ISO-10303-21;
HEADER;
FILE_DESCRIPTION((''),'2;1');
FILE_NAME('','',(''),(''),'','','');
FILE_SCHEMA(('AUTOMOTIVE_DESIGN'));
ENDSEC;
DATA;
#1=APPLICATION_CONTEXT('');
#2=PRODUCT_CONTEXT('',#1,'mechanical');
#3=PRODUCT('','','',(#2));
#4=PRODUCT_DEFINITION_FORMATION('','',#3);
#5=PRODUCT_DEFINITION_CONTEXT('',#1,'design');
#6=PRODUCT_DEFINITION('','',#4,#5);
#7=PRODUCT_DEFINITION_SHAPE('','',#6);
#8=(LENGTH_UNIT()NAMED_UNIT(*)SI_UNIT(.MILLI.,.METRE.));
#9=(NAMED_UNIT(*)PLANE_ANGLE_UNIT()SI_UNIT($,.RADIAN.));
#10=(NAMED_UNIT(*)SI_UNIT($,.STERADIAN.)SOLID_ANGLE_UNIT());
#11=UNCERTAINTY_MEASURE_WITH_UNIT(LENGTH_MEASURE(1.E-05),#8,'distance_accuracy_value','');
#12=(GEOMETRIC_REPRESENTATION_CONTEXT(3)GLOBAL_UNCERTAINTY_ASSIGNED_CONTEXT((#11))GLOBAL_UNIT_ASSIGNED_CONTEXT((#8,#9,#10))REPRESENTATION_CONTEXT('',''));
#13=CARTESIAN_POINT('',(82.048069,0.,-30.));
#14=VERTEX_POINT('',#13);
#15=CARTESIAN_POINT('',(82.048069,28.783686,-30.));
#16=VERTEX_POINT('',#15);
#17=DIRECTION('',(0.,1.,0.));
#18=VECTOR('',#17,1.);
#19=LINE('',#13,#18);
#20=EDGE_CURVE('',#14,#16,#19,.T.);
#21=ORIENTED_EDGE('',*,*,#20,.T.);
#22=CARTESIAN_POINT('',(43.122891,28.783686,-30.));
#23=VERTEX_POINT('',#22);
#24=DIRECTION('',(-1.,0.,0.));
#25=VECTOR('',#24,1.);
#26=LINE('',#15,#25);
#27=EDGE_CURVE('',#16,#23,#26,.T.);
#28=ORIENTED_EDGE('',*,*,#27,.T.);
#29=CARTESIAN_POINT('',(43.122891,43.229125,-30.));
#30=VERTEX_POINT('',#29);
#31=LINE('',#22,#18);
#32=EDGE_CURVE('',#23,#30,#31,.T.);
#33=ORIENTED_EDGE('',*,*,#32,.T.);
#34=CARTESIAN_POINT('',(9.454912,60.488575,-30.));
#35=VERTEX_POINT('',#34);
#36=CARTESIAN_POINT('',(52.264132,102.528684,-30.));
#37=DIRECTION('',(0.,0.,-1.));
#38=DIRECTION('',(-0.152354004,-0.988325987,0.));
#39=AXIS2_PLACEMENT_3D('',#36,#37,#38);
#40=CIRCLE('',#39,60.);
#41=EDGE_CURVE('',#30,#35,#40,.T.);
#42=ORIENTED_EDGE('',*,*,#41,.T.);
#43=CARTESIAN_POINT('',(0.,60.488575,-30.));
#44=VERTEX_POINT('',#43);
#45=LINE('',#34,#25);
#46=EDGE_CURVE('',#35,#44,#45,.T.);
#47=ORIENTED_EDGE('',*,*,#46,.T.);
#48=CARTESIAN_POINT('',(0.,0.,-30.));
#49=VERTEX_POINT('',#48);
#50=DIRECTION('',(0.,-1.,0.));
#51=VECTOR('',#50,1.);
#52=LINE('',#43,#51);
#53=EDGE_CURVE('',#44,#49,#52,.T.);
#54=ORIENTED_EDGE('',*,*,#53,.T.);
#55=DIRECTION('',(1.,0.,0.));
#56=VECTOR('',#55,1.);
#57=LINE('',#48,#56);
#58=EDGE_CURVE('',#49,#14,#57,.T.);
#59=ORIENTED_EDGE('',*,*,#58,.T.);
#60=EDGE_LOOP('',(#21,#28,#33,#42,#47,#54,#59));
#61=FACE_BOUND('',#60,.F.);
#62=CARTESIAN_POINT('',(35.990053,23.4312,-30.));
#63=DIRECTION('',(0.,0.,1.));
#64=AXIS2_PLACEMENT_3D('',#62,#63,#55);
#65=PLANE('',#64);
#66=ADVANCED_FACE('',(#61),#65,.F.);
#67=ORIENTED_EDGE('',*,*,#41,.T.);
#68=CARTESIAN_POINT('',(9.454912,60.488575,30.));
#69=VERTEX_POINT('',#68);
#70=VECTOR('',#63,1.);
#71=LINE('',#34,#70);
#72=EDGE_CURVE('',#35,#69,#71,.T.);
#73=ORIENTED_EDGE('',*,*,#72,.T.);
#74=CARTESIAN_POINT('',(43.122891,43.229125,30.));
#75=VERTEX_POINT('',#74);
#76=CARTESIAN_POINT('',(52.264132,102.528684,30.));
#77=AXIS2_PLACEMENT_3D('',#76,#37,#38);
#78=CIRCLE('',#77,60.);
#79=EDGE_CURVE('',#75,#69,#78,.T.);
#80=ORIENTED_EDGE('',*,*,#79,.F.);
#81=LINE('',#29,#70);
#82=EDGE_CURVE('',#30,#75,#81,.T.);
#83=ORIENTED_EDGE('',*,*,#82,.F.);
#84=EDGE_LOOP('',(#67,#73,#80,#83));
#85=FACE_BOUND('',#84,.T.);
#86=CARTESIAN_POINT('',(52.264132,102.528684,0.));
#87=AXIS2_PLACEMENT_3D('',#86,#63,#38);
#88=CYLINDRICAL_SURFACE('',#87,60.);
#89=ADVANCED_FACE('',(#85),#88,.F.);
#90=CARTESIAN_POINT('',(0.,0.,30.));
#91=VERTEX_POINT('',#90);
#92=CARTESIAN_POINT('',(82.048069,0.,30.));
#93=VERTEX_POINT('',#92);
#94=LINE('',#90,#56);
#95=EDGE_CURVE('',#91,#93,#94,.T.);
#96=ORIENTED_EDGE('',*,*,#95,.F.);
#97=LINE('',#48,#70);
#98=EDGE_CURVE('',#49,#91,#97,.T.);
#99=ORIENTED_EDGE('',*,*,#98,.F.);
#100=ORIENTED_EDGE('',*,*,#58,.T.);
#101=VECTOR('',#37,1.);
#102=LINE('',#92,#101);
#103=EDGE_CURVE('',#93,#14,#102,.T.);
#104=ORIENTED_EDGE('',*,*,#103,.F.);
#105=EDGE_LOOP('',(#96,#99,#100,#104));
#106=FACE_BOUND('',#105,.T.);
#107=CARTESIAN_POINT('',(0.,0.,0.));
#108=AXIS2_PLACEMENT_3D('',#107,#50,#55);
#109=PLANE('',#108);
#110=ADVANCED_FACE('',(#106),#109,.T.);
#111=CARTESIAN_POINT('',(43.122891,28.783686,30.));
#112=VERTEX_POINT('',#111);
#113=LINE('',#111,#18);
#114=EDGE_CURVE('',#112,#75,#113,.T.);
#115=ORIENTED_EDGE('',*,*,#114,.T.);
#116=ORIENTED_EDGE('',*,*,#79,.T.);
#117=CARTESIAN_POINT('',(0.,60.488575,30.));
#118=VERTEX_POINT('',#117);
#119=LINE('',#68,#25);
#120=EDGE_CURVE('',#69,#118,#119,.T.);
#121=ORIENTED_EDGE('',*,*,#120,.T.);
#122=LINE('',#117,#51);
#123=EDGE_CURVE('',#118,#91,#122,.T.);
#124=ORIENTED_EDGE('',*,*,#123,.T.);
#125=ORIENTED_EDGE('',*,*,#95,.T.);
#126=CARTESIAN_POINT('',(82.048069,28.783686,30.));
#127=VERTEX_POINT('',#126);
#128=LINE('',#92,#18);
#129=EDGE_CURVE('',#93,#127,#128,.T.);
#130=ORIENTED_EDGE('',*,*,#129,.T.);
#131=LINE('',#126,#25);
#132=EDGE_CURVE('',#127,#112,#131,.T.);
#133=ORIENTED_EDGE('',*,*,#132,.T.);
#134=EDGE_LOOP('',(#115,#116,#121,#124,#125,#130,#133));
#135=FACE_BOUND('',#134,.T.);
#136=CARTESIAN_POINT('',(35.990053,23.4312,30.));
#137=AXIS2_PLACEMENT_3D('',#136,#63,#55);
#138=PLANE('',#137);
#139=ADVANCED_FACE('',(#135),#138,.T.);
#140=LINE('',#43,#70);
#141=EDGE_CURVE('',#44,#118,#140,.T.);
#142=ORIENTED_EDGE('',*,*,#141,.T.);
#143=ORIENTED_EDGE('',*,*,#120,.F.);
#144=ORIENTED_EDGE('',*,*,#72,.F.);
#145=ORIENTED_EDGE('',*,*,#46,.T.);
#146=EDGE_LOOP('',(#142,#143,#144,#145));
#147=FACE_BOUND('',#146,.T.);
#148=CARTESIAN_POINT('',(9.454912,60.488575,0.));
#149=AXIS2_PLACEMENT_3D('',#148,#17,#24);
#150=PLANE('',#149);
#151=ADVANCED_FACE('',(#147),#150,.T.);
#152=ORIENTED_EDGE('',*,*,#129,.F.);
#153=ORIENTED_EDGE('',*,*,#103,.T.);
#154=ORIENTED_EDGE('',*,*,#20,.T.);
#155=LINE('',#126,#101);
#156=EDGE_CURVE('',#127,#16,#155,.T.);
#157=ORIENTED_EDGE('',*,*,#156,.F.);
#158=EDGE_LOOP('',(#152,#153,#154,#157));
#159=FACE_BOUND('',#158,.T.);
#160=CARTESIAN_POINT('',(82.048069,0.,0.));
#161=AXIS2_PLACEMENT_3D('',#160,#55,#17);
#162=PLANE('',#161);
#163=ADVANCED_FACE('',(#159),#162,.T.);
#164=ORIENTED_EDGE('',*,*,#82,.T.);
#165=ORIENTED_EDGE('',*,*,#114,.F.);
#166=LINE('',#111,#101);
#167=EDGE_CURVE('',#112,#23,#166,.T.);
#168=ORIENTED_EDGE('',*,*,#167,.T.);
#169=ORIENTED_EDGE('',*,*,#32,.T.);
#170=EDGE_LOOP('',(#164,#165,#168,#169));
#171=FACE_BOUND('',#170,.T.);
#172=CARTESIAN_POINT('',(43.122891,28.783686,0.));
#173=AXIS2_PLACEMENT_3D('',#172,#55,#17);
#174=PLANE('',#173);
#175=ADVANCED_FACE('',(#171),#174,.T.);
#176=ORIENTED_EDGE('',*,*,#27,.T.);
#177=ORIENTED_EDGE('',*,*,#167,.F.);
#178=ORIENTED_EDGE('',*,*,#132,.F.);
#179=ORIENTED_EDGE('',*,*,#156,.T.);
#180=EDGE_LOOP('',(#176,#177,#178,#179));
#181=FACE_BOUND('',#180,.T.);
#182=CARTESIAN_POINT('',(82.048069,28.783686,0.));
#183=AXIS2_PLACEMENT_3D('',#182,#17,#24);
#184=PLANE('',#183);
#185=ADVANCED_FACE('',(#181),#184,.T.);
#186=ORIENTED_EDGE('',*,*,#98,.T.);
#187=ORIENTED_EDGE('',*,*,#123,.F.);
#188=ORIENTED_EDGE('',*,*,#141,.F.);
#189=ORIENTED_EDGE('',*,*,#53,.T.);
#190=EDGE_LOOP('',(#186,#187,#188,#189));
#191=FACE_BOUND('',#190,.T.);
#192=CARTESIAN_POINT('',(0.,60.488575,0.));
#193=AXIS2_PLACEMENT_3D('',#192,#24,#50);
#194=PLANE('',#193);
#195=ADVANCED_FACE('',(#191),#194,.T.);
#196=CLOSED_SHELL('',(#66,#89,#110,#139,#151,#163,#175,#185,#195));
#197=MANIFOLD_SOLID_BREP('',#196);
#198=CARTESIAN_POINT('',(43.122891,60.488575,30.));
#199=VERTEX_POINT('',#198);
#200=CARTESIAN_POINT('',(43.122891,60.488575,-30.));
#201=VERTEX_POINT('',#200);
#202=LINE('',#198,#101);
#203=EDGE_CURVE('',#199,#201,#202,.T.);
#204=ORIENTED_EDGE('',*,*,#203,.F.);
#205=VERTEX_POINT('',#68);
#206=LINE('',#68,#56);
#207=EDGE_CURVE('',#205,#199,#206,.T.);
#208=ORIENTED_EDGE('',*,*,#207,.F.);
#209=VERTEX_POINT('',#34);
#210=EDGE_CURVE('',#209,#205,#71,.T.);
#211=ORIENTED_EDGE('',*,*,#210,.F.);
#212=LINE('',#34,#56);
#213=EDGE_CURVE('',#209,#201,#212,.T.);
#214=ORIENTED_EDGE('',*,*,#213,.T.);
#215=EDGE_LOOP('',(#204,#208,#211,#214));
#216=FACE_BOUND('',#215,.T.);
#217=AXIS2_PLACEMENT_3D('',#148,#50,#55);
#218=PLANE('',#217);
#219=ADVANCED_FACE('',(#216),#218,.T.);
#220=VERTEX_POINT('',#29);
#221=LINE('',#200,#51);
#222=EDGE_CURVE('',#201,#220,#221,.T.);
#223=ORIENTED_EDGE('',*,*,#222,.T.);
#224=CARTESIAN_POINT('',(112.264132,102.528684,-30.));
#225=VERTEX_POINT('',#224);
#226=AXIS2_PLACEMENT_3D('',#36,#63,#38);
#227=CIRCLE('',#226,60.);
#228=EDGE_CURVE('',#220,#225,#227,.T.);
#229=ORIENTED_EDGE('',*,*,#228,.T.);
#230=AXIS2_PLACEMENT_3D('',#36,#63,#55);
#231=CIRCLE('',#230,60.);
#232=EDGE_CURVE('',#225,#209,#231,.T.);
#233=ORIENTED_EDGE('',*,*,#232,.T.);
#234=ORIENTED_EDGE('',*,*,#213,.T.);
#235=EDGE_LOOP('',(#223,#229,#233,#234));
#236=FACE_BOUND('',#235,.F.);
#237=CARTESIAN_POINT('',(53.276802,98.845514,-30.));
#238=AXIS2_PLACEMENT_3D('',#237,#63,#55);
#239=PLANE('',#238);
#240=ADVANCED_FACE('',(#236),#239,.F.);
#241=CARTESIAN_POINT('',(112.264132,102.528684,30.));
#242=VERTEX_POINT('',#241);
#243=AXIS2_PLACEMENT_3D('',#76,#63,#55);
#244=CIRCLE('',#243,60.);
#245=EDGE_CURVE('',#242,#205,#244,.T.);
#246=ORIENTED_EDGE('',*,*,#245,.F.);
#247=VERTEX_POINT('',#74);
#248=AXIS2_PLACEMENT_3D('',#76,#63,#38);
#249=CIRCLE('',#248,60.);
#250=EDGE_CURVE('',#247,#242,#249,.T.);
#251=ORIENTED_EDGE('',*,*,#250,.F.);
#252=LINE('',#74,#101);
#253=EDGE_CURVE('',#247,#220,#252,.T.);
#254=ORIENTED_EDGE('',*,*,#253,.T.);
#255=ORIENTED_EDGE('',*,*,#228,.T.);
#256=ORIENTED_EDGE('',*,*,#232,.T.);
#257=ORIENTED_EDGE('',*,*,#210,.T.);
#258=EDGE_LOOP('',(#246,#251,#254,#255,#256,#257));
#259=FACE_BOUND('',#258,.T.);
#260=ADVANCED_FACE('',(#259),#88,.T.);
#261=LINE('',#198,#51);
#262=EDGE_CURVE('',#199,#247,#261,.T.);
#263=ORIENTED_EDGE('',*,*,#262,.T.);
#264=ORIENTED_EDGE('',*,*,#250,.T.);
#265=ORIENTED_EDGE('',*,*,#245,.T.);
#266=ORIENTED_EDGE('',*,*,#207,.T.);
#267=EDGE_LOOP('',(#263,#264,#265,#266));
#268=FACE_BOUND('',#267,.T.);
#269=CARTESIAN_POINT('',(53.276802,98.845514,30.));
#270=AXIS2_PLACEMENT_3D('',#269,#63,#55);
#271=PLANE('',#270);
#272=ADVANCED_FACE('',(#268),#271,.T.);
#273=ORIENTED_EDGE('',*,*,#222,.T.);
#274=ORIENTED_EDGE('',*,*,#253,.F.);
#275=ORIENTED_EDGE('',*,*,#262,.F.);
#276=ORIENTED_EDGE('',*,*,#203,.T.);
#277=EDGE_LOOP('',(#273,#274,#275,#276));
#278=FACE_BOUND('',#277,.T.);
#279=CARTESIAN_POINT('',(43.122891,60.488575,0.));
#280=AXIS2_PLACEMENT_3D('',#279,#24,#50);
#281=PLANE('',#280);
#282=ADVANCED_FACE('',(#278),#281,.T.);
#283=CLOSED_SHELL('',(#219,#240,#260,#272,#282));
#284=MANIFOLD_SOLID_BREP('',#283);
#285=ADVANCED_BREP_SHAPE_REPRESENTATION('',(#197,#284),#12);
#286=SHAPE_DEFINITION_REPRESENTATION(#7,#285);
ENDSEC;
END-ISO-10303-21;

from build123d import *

# Parameters (mm, degrees)
F2_DEPTH = 30


with BuildPart() as f2:
    # F1 (on face) → F2 (new body, symmetric)
    with BuildSketch(Plane.XY):
        with BuildLine():
            ThreePointArc((43.1228913367, 43.2291245988), (91.3251453141, 56.9848894443), (112.2641316056, 102.5286838412))
            ThreePointArc((112.2641316056, 102.5286838412), (94.6905384768, 144.9550907124), (52.2641316056, 162.5286838412))
            ThreePointArc((52.2641316056, 162.5286838412), (-3.0640101085, 125.7406793276), (9.4549124143, 60.4885749899))
            Line((9.4549124143, 60.4885749899), (43.1228913367, 60.4885749899))
            Line((43.1228913367, 60.4885749899), (43.1228913367, 43.2291245988))
        make_face()
    extrude(amount=F2_DEPTH, both=True)


with BuildPart() as f2b:
    # F1 (on face) → F2, piece 2 (new body, symmetric)
    with BuildSketch(Plane.XY):
        with BuildLine():
            Line((43.1228913367, 28.7836860266), (43.1228913367, 43.2291245988))
            ThreePointArc((43.1228913367, 43.2291245988), (24.8928927501, 49.1356572973), (9.4549124143, 60.4885749899))
            Line((9.4549124143, 60.4885749899), (0, 60.4885749899))
            Line((0, 60.4885749899), (0, 0))
            Line((0, 0), (82.0480691682, 0))
            Line((82.0480691682, 0), (82.0480691682, 28.7836860266))
            Line((82.0480691682, 28.7836860266), (43.1228913367, 28.7836860266))
        make_face()
    extrude(amount=F2_DEPTH, both=True)


solid = Compound([f2.part, f2b.part])
